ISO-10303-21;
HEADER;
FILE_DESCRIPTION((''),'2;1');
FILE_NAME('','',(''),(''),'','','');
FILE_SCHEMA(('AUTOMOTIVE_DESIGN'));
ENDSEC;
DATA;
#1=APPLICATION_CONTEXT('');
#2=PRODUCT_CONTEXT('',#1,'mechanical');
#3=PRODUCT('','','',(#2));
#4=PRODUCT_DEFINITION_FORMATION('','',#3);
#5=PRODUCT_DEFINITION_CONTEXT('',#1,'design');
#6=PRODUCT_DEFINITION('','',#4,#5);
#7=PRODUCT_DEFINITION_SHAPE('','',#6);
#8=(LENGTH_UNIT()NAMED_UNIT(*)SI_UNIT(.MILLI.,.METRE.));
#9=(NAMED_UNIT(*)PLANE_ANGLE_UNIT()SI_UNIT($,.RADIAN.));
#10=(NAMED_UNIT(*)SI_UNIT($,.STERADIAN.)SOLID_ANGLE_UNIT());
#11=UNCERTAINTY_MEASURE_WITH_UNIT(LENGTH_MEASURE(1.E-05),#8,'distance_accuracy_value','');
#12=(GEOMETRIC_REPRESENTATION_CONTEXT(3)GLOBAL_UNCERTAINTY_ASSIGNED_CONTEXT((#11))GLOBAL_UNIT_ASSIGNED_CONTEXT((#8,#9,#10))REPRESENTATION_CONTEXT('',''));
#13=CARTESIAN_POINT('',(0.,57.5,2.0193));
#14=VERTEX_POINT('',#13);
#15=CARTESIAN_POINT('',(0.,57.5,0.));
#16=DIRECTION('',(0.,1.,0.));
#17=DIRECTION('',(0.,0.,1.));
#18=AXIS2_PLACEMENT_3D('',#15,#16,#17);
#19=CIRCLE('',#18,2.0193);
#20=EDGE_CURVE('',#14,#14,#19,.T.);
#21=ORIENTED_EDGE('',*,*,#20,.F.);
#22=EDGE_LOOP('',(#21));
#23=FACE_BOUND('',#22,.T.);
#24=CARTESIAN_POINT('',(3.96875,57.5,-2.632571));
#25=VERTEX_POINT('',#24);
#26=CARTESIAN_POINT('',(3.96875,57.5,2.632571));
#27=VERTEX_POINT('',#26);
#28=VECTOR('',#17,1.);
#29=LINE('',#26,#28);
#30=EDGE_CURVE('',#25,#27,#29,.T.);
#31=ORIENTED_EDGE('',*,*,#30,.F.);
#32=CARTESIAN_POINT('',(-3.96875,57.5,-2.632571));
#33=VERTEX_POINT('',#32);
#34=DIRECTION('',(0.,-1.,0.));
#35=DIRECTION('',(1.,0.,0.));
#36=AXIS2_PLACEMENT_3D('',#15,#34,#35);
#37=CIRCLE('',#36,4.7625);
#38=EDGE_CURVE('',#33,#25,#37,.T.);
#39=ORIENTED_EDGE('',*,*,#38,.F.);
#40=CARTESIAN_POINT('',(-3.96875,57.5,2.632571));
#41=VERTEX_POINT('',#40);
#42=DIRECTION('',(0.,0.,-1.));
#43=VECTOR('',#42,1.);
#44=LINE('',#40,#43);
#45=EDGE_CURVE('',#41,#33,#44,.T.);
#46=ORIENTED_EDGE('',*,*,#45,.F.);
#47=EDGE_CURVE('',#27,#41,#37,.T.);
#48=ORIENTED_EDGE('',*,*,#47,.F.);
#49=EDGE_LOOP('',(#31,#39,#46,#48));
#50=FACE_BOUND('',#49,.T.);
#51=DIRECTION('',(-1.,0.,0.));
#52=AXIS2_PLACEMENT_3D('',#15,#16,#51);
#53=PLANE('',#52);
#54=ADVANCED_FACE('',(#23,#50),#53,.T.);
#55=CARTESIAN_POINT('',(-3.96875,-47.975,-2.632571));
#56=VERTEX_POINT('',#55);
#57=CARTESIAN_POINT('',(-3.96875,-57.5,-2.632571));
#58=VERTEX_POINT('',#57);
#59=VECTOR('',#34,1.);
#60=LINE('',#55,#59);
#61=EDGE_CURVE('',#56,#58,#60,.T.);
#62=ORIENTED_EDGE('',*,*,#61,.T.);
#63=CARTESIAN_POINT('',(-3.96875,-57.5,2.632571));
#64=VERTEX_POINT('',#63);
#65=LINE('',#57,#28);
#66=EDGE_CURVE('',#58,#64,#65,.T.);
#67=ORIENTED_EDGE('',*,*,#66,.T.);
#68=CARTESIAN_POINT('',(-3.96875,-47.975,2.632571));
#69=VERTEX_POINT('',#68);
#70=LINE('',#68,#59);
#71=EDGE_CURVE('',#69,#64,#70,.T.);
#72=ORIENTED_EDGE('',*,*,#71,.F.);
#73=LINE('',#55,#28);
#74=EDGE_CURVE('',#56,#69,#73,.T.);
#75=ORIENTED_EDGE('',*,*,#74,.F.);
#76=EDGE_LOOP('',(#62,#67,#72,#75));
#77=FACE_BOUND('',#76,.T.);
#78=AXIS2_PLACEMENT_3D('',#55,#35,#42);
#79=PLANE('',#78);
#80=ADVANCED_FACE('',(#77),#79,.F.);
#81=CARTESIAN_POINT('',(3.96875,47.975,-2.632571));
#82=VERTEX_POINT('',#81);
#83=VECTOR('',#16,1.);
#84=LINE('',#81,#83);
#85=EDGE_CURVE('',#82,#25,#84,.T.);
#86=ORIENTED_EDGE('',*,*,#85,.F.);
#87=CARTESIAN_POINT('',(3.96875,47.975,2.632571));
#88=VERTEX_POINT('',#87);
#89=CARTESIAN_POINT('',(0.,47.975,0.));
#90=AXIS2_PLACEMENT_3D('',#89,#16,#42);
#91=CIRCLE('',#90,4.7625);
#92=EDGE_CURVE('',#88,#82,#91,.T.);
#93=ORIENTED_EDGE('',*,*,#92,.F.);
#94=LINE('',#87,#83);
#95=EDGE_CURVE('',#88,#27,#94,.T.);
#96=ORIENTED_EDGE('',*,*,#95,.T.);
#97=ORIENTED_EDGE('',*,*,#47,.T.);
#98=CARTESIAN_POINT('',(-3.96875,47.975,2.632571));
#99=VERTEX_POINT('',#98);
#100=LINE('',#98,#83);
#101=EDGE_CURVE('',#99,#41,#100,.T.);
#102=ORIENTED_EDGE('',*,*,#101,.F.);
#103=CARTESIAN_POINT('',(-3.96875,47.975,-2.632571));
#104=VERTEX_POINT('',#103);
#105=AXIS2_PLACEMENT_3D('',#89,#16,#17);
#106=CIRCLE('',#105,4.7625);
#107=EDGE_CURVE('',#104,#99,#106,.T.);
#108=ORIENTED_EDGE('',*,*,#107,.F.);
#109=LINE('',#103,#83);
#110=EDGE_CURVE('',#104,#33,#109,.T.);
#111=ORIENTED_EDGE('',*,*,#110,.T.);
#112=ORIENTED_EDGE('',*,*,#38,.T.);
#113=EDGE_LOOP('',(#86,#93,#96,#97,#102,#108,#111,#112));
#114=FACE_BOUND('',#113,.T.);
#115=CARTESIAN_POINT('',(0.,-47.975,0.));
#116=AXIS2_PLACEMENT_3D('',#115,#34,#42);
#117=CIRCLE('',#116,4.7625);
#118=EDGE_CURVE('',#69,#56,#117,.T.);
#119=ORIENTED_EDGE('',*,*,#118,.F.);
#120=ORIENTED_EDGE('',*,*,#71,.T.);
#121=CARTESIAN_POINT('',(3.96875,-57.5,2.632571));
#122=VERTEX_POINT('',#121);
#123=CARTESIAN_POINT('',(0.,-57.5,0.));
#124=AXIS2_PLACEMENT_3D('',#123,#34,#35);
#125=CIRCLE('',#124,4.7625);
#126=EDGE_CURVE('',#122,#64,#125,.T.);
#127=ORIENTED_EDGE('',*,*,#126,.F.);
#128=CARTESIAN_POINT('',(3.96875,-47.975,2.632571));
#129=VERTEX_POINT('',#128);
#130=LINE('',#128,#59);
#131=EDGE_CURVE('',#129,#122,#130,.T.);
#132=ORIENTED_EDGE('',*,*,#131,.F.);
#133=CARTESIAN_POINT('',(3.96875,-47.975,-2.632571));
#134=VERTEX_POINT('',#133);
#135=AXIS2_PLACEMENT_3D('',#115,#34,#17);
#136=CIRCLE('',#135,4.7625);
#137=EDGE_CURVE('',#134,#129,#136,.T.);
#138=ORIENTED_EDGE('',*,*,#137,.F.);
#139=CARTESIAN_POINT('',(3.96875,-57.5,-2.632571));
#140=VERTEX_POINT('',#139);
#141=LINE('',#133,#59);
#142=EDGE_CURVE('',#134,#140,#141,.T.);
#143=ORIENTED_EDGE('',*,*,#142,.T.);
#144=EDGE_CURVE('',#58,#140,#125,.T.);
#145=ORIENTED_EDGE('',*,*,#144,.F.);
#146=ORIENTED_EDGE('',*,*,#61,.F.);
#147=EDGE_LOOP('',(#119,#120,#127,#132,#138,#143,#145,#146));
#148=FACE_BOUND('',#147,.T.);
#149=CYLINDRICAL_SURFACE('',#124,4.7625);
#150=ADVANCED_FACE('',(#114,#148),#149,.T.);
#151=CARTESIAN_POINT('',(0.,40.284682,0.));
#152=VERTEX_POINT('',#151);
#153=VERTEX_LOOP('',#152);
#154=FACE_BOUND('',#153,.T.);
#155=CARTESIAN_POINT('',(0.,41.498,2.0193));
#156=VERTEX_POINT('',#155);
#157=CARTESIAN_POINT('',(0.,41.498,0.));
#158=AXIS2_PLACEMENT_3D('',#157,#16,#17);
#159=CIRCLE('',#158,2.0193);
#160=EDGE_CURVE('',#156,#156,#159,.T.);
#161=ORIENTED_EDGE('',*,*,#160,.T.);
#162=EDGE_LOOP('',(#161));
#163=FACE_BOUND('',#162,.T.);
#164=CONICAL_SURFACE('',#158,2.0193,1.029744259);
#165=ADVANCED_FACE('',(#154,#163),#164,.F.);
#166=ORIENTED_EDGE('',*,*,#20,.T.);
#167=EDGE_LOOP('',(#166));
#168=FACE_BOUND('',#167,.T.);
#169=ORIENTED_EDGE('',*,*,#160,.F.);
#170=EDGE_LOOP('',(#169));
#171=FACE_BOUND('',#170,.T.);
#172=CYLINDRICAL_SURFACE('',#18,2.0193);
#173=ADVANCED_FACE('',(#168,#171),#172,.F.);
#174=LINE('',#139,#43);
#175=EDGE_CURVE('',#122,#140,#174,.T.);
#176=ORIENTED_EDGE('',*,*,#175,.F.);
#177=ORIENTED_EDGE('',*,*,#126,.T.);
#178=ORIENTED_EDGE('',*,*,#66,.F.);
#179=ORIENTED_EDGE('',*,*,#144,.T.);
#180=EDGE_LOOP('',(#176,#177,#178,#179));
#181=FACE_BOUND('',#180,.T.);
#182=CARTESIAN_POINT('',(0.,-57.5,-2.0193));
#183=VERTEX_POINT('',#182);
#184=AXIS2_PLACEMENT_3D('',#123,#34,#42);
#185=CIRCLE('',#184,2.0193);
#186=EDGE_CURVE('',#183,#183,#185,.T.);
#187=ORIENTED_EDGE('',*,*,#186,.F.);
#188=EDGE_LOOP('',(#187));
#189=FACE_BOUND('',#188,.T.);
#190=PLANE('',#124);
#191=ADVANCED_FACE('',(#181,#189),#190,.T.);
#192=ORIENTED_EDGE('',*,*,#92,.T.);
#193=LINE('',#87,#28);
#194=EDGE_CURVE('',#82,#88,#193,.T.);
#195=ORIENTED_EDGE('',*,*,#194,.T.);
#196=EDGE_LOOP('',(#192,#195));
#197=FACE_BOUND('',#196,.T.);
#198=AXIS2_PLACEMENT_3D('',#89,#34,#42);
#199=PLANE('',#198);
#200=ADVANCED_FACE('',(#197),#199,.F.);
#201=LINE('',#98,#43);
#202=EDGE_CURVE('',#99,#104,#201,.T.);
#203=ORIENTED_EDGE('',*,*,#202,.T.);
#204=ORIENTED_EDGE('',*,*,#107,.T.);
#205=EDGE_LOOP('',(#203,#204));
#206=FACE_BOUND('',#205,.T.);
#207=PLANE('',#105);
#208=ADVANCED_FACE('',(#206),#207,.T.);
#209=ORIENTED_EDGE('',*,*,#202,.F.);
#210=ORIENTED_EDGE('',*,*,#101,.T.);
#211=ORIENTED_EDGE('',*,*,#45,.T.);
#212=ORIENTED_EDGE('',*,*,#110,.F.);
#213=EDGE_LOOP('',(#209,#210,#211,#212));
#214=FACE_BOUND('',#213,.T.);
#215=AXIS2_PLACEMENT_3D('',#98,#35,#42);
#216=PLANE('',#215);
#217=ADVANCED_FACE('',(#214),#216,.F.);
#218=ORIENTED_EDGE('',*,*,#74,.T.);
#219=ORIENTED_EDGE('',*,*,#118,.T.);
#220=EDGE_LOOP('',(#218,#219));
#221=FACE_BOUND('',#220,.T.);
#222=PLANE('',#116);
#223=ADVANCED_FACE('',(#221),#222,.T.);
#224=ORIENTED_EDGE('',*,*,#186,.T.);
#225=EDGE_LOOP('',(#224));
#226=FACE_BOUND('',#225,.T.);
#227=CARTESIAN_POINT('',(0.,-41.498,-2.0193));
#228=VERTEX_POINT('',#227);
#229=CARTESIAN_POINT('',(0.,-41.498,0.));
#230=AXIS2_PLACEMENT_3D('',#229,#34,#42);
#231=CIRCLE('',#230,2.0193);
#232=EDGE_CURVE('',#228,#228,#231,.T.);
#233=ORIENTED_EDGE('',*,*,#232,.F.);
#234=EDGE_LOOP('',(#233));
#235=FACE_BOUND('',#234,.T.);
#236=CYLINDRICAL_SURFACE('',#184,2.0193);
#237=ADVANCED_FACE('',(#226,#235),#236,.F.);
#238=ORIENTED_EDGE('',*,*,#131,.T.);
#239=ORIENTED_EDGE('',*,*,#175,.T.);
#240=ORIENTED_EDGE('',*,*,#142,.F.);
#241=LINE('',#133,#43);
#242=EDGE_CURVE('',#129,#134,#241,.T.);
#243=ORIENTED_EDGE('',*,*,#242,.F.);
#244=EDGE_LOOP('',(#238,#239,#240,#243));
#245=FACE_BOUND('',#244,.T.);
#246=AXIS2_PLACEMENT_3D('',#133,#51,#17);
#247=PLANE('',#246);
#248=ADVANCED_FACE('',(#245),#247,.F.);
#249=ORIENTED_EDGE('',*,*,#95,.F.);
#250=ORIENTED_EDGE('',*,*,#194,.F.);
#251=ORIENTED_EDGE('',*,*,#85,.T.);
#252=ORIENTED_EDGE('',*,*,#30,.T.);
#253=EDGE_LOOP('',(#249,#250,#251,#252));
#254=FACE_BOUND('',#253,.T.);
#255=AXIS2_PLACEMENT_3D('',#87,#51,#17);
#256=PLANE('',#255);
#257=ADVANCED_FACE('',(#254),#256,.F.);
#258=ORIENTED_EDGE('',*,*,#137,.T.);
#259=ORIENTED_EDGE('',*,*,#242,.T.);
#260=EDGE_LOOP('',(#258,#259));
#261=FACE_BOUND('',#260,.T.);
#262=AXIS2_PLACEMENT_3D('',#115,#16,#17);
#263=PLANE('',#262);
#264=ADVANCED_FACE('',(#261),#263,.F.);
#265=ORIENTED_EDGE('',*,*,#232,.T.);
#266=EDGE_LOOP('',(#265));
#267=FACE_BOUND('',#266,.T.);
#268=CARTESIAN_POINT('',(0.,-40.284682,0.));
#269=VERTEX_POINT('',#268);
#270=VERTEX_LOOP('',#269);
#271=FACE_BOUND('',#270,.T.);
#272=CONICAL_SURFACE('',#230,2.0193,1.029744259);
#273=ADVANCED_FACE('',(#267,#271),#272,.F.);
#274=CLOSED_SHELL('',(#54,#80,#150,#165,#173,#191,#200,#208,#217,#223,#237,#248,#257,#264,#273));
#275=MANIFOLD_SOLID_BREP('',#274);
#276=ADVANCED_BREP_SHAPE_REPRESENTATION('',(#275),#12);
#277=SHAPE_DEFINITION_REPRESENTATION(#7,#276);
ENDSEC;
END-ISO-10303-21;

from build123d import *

# Parameters (mm, degrees)
SKETCH1_W          = 1.5875
SKETCH1_H          = 76.9
CUT_EXTRUDE3_START = -9.525
CUT_EXTRUDE3_DEPTH = 9.525
CUT_EXTRUDE4_DEPTH = 9.525


# Read off the part's stored shape, not the designer's step: Tap Drill for #10-32 Tap1
with BuildPart() as part:
    # Sketch1 → Revolve1 (revolve)
    with BuildSketch(Plane.XY, mode=Mode.PRIVATE) as revolve1_sk:
        with Locations((-3.96875, 0)):
            Rectangle(SKETCH1_W, SKETCH1_H)
        Polygon((0, -57.5), (-4.7625, -57.5), (-4.7625, -38.45), (-3.175, -38.45), (-3.175, 38.45), (-4.7625, 38.45), (-4.7625, 57.5), (0, 57.5), align=None)
    revolve(revolve1_sk.sketch.rotate(Axis((0, -57.5, 0), (0, 1, 0)), 180), axis=Axis((0, -57.5, 0), (0, 1, 0)))

    # Sketch2 → Cut-Extrude3 (cut)
    with BuildSketch(Plane.XZ.offset(57.5).offset(CUT_EXTRUDE3_START)):
        with BuildLine():
            Line((-3.96875, -2.632570927), (-3.96875, 2.632570927))
            ThreePointArc((-3.96875, 2.632570927), (-4.7625, 0), (-3.96875, -2.632570927))
        make_face()
        with BuildLine():
            Line((3.96875, -2.632570927), (3.96875, 2.632570927))
            ThreePointArc((3.96875, 2.632570927), (4.7625, 0), (3.96875, -2.632570927))
        make_face()
    extrude(amount=CUT_EXTRUDE3_DEPTH, mode=Mode.SUBTRACT)

    # Sketch5 → Cut-Extrude4 (cut)
    with BuildSketch(Plane(origin=(0, 57.5, 0), x_dir=(1, 0, 0), z_dir=(0, 1, 0))):
        with BuildLine():
            Line((-3.96875, -2.632570927), (-3.96875, 2.632570927))
            ThreePointArc((-3.96875, 2.632570927), (-4.7625, 0), (-3.96875, -2.632570927))
        make_face()
        with BuildLine():
            Line((3.96875, -2.632570927), (3.96875, 2.632570927))
            ThreePointArc((3.96875, 2.632570927), (4.7625, 0), (3.96875, -2.632570927))
        make_face()
    extrude(amount=-CUT_EXTRUDE4_DEPTH, mode=Mode.SUBTRACT)

    # Tap Drill for #10-32 Tap1 outline → Tap Drill for #10-32 Tap1 (revolve, cut)
    with BuildSketch(Plane.XY):
        Polygon((0, 57.5), (0, 40.284682152), (2.0193, 41.498), (2.0193, 57.5), align=None)
        Polygon((2.0193, -41.498), (0, -40.284682152), (0, -57.5), (2.0193, -57.5), align=None)
    revolve(axis=Axis((0, 0, 0), (0, 1, 0)), mode=Mode.SUBTRACT)


solid = part.part
